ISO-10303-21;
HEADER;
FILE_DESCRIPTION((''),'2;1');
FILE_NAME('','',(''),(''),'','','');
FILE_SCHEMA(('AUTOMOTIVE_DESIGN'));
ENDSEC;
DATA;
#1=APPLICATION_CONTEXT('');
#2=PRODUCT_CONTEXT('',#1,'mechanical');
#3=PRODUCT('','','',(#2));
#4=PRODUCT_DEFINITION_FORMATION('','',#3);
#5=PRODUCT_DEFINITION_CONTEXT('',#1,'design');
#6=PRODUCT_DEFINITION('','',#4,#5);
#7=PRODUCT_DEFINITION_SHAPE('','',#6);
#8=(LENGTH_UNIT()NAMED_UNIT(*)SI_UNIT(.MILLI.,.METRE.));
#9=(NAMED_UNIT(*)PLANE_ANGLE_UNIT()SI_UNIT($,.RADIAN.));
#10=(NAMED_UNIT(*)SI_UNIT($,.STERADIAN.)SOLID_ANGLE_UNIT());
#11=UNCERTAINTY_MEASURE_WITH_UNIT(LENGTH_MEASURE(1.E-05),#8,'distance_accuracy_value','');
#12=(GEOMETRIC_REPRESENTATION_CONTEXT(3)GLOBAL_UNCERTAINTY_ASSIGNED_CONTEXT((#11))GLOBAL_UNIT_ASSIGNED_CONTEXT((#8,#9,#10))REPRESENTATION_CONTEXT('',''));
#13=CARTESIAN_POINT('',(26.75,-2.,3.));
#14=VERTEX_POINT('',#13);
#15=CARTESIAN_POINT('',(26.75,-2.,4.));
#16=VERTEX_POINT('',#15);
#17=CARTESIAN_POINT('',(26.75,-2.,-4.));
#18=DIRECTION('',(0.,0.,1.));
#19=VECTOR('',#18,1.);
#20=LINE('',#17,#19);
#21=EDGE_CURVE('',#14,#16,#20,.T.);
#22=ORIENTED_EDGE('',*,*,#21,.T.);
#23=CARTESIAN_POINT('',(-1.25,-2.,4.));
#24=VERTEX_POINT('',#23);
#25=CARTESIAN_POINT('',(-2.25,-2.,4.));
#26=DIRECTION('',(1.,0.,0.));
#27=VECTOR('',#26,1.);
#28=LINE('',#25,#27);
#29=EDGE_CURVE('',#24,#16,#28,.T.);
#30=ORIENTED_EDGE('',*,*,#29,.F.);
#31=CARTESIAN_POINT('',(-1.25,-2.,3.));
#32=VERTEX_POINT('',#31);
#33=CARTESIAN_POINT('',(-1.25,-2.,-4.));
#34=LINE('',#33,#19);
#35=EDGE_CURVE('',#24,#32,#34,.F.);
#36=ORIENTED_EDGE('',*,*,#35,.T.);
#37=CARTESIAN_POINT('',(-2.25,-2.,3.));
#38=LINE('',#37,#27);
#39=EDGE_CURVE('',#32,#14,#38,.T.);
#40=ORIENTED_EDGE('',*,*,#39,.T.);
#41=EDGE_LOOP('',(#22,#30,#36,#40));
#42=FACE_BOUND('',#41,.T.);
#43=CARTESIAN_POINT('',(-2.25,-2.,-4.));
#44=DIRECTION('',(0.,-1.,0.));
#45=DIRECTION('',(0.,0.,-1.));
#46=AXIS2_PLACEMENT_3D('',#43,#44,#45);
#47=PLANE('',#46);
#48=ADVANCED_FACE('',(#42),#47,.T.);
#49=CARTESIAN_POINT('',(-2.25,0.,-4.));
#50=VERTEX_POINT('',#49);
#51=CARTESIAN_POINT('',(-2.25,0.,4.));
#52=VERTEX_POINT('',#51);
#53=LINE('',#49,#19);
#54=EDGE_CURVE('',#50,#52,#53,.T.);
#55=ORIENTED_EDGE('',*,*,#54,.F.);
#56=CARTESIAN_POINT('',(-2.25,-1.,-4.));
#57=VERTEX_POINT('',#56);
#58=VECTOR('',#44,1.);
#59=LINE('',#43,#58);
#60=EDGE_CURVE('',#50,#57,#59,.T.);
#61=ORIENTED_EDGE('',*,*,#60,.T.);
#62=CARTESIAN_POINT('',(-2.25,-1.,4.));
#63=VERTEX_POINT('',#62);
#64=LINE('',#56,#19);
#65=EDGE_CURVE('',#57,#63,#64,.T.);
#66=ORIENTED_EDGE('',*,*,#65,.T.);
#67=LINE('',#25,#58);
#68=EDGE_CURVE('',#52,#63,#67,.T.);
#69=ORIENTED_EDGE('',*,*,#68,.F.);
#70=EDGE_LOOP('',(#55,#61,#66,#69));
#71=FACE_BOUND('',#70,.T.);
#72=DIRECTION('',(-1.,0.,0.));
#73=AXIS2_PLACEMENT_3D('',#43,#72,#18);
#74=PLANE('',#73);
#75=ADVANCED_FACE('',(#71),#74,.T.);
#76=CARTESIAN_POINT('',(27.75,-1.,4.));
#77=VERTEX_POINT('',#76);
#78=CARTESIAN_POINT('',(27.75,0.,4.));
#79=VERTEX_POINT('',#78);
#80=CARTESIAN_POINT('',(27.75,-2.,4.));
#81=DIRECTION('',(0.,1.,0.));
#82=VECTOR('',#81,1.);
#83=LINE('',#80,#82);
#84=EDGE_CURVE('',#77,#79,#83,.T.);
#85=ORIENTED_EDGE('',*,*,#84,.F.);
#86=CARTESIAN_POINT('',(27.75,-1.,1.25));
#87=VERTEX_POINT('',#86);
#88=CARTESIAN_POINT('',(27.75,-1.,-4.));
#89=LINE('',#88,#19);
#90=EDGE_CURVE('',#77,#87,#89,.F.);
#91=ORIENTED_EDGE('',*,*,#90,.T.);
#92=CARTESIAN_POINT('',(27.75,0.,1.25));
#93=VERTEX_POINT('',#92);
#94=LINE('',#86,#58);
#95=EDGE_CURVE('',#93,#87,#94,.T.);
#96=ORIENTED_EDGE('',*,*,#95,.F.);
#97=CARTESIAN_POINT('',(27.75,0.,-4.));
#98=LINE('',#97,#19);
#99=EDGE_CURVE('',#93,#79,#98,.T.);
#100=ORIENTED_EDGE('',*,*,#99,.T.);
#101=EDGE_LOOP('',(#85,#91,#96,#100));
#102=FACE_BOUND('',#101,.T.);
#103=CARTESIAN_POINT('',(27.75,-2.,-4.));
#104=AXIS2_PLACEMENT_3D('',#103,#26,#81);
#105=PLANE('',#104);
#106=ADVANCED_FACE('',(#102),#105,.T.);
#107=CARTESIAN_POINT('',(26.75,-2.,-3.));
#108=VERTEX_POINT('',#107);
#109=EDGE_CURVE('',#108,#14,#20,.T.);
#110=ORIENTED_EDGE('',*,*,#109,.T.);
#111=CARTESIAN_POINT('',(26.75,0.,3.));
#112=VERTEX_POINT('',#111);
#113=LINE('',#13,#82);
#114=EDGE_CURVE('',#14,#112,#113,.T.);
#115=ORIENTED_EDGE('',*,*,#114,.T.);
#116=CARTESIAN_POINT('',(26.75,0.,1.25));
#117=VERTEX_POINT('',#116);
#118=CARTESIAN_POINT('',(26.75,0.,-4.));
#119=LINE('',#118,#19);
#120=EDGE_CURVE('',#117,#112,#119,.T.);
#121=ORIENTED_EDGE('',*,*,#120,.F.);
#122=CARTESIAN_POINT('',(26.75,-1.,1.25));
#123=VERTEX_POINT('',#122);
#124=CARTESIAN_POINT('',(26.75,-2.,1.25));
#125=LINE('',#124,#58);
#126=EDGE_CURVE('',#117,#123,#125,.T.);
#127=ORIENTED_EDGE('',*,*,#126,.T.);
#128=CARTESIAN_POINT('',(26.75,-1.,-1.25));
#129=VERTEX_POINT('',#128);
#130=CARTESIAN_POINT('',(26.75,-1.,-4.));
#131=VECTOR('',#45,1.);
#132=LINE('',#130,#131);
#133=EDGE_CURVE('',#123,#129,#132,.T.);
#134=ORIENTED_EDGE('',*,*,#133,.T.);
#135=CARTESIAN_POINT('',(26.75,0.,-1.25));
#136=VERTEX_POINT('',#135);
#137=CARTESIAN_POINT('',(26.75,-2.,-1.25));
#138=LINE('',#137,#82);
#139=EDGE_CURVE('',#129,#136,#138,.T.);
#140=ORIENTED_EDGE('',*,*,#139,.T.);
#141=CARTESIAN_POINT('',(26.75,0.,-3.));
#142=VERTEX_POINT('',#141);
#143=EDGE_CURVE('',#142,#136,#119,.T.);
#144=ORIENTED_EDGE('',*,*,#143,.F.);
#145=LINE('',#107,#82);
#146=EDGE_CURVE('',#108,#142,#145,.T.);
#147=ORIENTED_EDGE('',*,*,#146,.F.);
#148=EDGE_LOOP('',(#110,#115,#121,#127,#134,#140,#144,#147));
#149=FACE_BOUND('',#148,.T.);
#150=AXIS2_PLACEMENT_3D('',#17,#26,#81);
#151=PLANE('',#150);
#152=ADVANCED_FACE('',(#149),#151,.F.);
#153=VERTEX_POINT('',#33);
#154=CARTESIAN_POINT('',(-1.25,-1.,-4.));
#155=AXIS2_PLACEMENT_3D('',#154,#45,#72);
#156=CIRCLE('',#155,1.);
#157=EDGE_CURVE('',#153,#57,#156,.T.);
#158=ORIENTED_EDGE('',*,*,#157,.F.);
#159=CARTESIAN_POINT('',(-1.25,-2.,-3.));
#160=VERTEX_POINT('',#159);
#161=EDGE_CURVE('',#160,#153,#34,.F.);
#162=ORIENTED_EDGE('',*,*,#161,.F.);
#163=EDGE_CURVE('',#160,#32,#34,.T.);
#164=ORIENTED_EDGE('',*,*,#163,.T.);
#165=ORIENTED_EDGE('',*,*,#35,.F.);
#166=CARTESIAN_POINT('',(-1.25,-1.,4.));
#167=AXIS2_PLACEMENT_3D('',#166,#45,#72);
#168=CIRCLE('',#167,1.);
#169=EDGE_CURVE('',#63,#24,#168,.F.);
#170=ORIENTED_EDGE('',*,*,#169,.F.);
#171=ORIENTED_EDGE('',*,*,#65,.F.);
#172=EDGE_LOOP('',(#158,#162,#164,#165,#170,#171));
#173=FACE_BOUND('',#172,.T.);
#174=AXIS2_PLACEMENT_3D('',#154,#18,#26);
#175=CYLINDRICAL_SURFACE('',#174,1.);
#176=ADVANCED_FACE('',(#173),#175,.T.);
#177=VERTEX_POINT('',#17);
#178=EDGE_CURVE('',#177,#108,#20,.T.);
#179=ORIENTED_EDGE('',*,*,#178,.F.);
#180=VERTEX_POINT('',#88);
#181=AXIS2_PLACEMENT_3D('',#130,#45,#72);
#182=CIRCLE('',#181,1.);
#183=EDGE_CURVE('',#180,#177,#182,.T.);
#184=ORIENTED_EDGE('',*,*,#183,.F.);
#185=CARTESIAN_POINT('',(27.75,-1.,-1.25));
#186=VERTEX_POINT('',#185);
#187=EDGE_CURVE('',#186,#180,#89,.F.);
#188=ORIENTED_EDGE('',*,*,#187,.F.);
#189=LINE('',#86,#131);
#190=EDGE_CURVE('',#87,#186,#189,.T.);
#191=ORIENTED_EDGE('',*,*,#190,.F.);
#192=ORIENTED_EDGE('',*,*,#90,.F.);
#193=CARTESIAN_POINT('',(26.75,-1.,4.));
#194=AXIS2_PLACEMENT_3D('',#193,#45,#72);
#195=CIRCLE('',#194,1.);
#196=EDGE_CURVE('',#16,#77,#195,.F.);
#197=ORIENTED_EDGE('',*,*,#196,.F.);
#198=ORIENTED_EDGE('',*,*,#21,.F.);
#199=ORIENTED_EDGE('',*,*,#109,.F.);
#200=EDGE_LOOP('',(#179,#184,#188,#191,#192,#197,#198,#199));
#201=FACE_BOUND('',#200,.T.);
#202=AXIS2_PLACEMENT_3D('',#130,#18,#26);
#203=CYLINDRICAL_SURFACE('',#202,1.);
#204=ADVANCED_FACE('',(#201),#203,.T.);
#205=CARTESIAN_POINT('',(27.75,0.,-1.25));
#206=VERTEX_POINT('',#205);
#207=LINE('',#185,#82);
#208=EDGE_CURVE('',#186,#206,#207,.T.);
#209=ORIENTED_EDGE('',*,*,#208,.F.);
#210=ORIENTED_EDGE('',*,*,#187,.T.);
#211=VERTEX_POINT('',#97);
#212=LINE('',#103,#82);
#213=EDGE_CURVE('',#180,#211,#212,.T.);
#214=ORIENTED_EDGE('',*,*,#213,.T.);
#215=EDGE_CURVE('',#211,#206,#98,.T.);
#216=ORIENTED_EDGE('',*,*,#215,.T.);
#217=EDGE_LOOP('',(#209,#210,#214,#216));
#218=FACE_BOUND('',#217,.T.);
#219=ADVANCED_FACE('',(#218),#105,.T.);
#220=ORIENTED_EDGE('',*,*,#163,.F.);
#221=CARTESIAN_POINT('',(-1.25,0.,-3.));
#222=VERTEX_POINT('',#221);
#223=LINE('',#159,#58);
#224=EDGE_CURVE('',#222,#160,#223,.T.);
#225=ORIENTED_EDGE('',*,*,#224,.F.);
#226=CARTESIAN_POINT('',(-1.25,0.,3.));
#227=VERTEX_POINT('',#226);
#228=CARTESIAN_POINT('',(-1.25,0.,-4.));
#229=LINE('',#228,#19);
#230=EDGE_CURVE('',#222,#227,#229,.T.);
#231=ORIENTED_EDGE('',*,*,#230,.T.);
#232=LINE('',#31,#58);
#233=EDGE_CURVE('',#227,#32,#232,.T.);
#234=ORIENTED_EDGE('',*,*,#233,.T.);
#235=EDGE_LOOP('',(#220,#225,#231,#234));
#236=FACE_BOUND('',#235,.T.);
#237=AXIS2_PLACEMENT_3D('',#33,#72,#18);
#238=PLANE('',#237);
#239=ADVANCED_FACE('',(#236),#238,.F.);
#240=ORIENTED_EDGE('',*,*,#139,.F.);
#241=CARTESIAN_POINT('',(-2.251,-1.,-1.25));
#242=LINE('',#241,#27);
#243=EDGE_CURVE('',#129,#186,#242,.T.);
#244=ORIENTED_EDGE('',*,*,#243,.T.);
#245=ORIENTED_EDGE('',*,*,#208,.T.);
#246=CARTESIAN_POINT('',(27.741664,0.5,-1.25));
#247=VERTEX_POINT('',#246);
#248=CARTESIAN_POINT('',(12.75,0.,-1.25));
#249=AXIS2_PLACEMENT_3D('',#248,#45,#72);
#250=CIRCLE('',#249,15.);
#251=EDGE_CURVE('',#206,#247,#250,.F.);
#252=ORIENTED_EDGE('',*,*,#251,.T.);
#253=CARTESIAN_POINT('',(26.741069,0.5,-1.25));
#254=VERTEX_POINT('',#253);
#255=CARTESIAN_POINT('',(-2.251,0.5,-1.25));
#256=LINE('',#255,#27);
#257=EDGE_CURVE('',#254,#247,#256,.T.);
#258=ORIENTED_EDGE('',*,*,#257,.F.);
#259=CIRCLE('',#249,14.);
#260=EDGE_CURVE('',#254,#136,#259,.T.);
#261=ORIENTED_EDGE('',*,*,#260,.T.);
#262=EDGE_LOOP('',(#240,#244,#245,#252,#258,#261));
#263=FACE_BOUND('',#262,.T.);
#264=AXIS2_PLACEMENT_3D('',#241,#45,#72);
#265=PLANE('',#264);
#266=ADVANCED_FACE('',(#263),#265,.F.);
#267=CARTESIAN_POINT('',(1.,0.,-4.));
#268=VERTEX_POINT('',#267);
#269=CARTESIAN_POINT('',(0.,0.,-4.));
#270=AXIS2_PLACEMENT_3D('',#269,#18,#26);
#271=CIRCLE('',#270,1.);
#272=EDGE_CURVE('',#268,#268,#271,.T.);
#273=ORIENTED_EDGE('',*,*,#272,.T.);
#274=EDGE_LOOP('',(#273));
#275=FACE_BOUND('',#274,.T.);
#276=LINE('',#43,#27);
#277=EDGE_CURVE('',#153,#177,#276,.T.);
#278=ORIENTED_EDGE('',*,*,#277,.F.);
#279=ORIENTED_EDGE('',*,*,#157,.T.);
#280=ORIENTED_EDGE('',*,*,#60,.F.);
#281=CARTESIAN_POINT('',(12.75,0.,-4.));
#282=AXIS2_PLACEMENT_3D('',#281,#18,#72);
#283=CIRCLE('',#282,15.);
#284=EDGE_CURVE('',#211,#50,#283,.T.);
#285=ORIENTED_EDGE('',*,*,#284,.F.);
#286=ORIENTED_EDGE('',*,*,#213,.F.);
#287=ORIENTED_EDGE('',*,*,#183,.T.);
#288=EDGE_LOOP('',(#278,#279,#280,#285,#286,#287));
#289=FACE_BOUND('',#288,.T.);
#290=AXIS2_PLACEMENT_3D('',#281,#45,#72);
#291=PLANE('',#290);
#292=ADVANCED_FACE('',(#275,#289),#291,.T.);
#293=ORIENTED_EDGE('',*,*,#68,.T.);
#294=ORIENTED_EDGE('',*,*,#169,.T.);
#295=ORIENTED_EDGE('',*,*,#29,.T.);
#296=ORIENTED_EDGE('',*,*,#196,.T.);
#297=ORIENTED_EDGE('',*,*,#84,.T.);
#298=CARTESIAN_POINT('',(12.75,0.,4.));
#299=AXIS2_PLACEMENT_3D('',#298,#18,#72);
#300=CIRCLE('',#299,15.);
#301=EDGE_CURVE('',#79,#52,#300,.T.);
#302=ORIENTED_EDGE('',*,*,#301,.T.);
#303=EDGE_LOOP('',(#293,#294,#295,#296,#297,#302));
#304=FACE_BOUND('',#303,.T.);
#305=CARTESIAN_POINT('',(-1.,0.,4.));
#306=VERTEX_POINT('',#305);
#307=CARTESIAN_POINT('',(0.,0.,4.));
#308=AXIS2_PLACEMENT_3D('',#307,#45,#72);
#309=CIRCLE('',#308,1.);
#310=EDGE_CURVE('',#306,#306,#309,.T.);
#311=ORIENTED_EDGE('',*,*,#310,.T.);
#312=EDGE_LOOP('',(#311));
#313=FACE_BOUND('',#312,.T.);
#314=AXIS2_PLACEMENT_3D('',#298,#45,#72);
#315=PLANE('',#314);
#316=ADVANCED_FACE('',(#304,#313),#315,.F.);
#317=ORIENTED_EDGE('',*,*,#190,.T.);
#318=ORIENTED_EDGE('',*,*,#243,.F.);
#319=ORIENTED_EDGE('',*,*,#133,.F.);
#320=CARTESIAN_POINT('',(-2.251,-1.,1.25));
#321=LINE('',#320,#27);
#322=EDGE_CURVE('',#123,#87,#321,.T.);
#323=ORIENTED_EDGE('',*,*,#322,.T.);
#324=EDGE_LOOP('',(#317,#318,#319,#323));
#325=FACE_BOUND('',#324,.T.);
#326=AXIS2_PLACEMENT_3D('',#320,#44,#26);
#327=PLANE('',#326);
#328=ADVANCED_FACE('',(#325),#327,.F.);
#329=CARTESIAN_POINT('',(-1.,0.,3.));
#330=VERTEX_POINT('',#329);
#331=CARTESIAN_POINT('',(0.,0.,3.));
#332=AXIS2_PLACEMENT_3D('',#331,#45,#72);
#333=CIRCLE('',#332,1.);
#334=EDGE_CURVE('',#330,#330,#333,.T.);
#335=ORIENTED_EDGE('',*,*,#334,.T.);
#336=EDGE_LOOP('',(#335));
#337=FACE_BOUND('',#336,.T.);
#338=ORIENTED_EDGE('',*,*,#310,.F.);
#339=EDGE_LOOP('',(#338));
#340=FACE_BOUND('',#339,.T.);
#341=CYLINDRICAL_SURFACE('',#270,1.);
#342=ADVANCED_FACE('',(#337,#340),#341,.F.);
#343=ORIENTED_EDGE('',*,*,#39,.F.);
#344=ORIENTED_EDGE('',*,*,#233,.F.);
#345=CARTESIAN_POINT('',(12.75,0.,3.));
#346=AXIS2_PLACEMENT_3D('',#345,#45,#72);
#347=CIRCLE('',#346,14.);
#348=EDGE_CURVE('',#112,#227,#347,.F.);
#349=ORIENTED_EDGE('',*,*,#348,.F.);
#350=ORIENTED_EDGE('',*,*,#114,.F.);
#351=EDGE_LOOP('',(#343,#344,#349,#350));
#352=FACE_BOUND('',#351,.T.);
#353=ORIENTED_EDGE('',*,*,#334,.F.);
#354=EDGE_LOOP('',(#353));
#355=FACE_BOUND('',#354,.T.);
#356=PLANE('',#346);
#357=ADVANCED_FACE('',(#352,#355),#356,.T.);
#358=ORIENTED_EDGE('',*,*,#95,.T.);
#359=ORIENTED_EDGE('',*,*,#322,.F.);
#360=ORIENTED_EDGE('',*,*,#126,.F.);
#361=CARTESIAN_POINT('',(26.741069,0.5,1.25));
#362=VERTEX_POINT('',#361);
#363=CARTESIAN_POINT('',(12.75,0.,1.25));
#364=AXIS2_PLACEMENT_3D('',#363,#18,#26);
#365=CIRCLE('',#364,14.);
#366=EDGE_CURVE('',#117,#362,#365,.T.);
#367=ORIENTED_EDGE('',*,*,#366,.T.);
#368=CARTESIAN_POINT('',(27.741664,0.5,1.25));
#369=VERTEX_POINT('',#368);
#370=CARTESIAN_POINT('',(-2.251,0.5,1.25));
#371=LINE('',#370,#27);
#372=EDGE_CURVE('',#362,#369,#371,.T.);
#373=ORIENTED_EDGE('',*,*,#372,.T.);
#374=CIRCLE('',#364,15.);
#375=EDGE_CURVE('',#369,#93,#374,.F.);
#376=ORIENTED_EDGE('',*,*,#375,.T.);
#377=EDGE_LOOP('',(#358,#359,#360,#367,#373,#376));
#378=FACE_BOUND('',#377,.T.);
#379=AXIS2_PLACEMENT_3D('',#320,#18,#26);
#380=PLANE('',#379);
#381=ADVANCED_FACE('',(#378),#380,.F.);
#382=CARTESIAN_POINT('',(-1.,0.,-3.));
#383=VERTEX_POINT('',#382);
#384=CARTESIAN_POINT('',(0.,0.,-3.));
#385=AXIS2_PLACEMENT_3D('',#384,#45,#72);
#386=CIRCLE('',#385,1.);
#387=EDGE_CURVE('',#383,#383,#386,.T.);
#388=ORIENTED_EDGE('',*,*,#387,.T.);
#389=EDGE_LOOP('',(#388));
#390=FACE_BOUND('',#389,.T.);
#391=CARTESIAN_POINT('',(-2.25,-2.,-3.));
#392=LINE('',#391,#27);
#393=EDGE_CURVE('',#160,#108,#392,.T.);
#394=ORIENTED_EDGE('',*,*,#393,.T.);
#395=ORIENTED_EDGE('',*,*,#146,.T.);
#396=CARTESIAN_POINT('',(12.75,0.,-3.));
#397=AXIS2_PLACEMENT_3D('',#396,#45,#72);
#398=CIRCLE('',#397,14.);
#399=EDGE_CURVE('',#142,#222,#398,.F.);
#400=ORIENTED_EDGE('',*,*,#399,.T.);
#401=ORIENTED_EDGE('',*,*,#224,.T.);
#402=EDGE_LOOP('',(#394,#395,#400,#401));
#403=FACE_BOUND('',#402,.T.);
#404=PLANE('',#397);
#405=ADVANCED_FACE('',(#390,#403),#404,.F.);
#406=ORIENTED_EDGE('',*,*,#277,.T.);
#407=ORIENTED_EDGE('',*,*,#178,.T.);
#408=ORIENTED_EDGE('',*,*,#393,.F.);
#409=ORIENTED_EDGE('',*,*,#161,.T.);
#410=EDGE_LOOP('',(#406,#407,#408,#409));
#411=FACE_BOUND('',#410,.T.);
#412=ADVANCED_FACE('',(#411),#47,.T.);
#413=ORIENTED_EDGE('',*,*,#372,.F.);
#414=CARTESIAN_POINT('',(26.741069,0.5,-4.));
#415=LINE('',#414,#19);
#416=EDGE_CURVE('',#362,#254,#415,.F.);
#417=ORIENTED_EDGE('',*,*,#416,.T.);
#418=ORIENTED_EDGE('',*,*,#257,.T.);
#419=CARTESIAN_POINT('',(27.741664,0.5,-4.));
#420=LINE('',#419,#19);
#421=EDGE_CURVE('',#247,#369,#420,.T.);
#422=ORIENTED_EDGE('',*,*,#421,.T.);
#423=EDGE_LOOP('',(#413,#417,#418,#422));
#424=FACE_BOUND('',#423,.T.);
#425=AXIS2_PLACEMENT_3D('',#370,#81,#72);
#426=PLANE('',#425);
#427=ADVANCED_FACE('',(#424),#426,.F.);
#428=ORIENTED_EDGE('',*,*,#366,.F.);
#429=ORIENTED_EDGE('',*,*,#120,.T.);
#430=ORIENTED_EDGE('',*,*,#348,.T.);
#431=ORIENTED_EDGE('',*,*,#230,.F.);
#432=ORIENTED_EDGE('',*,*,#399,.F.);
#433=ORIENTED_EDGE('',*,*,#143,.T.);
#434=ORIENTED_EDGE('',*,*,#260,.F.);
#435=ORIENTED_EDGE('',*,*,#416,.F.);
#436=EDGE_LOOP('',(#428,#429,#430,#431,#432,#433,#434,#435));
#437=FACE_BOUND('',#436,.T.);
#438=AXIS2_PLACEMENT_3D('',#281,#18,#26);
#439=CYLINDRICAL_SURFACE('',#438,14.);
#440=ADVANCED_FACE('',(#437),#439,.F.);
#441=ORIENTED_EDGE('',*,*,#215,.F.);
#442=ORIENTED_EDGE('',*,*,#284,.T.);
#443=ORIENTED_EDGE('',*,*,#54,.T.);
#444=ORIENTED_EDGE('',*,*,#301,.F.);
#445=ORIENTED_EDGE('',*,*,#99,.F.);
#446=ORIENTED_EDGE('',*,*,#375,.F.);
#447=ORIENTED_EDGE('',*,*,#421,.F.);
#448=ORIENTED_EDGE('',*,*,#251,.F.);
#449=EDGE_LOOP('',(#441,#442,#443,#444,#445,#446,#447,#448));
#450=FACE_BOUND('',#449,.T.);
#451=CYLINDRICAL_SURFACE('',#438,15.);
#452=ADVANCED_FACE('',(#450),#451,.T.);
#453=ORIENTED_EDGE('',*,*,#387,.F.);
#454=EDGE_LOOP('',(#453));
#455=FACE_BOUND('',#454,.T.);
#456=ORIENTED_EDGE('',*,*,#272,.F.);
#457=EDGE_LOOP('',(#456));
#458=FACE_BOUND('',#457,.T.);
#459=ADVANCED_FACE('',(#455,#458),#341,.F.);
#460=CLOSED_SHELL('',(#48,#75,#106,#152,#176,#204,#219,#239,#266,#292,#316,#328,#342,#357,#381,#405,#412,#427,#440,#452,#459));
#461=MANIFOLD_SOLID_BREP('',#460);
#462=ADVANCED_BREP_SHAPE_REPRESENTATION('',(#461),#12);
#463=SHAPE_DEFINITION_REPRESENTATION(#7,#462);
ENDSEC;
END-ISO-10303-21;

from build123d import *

# Parameters (mm, degrees)
BOSS_EXTRUDE1_DEPTH      = 4
BOSS_EXTRUDE1_DEPTH_BACK = 4
SHELL1_T                 = -1
CUT_EXTRUDE1_DEPTH       = 33.543240466
CUT_EXTRUDE1_DEPTH_BACK  = 33.543240466
SKETCH2_R                = 1
CUT_EXTRUDE2_REACH       = 35.779
CUT_EXTRUDE2_END_RADIUS  = 14
SKETCH3_W                = 2.5
SKETCH3_H                = 1.5
FILLET2_R                = 1


with BuildPart() as part:
    # Sketch1 → Boss-Extrude1 (new, two sides: drawn at the far end of the back side and taken through both)
    with BuildSketch(Plane.XY.offset(-BOSS_EXTRUDE1_DEPTH_BACK)):
        with BuildLine():
            Line((-2.25, -2), (27.75, -2))
            Line((27.75, -2), (27.75, 0))
            ThreePointArc((27.75, 0), (12.75, 15), (-2.25, 0))
            Line((-2.25, 0), (-2.25, -2))
        make_face()
    extrude(amount=BOSS_EXTRUDE1_DEPTH + BOSS_EXTRUDE1_DEPTH_BACK)

    # Shell1
    shell1_openings = [part.faces().sort_by_distance(p)[0] for p in [
        (12.75, -2, 0),
    ]]
    offset(amount=SHELL1_T, openings=shell1_openings, kind=Kind.INTERSECTION)

    # Sketch2 → Cut-Extrude1 (cut, two sides: drawn at the far end of the back side and taken through both)
    with BuildSketch(Plane.XY.offset(4).offset(-CUT_EXTRUDE1_DEPTH_BACK)):
        with Locations(Location((0, 0, 0), (0, 0, 180))):
            Circle(SKETCH2_R)
    extrude(amount=CUT_EXTRUDE1_DEPTH + CUT_EXTRUDE1_DEPTH_BACK, mode=Mode.SUBTRACT)

    # Cut-Extrude2: up to this cylinder (the profile starts outside it)
    cut_extrude2_end = Plane(origin=(12.75, 0, 0), z_dir=(0, 0, 1)) * Cylinder(CUT_EXTRUDE2_END_RADIUS, 100.558, mode=Mode.PRIVATE)
    # Sketch3 → Cut-Extrude2 (cut, up to the surface)
    with BuildSketch(Plane(origin=(27.75, 0, 0), x_dir=(0, 0, -1), z_dir=(1, 0, 0)), mode=Mode.PRIVATE) as cut_extrude2_sk1:
        with Locations((0, -0.25)):
            Rectangle(SKETCH3_W, SKETCH3_H)
    cut_extrude2_tool1 = extrude(cut_extrude2_sk1.sketch, amount=-CUT_EXTRUDE2_REACH, mode=Mode.PRIVATE) - cut_extrude2_end
    add(cut_extrude2_tool1.solids().sort_by_distance((27.75, -0.25, 0))[0], mode=Mode.SUBTRACT)

    # Fillet2
    fillet2_edges = [part.edges().sort_by_distance(p)[0] for p in [
        (27.75, -2, 0),
        (-2.25, -2, 0),
    ]]
    fillet(fillet2_edges, radius=FILLET2_R - 0.0001)  # a hair under: the kernel refuses the full size


solid = part.part
